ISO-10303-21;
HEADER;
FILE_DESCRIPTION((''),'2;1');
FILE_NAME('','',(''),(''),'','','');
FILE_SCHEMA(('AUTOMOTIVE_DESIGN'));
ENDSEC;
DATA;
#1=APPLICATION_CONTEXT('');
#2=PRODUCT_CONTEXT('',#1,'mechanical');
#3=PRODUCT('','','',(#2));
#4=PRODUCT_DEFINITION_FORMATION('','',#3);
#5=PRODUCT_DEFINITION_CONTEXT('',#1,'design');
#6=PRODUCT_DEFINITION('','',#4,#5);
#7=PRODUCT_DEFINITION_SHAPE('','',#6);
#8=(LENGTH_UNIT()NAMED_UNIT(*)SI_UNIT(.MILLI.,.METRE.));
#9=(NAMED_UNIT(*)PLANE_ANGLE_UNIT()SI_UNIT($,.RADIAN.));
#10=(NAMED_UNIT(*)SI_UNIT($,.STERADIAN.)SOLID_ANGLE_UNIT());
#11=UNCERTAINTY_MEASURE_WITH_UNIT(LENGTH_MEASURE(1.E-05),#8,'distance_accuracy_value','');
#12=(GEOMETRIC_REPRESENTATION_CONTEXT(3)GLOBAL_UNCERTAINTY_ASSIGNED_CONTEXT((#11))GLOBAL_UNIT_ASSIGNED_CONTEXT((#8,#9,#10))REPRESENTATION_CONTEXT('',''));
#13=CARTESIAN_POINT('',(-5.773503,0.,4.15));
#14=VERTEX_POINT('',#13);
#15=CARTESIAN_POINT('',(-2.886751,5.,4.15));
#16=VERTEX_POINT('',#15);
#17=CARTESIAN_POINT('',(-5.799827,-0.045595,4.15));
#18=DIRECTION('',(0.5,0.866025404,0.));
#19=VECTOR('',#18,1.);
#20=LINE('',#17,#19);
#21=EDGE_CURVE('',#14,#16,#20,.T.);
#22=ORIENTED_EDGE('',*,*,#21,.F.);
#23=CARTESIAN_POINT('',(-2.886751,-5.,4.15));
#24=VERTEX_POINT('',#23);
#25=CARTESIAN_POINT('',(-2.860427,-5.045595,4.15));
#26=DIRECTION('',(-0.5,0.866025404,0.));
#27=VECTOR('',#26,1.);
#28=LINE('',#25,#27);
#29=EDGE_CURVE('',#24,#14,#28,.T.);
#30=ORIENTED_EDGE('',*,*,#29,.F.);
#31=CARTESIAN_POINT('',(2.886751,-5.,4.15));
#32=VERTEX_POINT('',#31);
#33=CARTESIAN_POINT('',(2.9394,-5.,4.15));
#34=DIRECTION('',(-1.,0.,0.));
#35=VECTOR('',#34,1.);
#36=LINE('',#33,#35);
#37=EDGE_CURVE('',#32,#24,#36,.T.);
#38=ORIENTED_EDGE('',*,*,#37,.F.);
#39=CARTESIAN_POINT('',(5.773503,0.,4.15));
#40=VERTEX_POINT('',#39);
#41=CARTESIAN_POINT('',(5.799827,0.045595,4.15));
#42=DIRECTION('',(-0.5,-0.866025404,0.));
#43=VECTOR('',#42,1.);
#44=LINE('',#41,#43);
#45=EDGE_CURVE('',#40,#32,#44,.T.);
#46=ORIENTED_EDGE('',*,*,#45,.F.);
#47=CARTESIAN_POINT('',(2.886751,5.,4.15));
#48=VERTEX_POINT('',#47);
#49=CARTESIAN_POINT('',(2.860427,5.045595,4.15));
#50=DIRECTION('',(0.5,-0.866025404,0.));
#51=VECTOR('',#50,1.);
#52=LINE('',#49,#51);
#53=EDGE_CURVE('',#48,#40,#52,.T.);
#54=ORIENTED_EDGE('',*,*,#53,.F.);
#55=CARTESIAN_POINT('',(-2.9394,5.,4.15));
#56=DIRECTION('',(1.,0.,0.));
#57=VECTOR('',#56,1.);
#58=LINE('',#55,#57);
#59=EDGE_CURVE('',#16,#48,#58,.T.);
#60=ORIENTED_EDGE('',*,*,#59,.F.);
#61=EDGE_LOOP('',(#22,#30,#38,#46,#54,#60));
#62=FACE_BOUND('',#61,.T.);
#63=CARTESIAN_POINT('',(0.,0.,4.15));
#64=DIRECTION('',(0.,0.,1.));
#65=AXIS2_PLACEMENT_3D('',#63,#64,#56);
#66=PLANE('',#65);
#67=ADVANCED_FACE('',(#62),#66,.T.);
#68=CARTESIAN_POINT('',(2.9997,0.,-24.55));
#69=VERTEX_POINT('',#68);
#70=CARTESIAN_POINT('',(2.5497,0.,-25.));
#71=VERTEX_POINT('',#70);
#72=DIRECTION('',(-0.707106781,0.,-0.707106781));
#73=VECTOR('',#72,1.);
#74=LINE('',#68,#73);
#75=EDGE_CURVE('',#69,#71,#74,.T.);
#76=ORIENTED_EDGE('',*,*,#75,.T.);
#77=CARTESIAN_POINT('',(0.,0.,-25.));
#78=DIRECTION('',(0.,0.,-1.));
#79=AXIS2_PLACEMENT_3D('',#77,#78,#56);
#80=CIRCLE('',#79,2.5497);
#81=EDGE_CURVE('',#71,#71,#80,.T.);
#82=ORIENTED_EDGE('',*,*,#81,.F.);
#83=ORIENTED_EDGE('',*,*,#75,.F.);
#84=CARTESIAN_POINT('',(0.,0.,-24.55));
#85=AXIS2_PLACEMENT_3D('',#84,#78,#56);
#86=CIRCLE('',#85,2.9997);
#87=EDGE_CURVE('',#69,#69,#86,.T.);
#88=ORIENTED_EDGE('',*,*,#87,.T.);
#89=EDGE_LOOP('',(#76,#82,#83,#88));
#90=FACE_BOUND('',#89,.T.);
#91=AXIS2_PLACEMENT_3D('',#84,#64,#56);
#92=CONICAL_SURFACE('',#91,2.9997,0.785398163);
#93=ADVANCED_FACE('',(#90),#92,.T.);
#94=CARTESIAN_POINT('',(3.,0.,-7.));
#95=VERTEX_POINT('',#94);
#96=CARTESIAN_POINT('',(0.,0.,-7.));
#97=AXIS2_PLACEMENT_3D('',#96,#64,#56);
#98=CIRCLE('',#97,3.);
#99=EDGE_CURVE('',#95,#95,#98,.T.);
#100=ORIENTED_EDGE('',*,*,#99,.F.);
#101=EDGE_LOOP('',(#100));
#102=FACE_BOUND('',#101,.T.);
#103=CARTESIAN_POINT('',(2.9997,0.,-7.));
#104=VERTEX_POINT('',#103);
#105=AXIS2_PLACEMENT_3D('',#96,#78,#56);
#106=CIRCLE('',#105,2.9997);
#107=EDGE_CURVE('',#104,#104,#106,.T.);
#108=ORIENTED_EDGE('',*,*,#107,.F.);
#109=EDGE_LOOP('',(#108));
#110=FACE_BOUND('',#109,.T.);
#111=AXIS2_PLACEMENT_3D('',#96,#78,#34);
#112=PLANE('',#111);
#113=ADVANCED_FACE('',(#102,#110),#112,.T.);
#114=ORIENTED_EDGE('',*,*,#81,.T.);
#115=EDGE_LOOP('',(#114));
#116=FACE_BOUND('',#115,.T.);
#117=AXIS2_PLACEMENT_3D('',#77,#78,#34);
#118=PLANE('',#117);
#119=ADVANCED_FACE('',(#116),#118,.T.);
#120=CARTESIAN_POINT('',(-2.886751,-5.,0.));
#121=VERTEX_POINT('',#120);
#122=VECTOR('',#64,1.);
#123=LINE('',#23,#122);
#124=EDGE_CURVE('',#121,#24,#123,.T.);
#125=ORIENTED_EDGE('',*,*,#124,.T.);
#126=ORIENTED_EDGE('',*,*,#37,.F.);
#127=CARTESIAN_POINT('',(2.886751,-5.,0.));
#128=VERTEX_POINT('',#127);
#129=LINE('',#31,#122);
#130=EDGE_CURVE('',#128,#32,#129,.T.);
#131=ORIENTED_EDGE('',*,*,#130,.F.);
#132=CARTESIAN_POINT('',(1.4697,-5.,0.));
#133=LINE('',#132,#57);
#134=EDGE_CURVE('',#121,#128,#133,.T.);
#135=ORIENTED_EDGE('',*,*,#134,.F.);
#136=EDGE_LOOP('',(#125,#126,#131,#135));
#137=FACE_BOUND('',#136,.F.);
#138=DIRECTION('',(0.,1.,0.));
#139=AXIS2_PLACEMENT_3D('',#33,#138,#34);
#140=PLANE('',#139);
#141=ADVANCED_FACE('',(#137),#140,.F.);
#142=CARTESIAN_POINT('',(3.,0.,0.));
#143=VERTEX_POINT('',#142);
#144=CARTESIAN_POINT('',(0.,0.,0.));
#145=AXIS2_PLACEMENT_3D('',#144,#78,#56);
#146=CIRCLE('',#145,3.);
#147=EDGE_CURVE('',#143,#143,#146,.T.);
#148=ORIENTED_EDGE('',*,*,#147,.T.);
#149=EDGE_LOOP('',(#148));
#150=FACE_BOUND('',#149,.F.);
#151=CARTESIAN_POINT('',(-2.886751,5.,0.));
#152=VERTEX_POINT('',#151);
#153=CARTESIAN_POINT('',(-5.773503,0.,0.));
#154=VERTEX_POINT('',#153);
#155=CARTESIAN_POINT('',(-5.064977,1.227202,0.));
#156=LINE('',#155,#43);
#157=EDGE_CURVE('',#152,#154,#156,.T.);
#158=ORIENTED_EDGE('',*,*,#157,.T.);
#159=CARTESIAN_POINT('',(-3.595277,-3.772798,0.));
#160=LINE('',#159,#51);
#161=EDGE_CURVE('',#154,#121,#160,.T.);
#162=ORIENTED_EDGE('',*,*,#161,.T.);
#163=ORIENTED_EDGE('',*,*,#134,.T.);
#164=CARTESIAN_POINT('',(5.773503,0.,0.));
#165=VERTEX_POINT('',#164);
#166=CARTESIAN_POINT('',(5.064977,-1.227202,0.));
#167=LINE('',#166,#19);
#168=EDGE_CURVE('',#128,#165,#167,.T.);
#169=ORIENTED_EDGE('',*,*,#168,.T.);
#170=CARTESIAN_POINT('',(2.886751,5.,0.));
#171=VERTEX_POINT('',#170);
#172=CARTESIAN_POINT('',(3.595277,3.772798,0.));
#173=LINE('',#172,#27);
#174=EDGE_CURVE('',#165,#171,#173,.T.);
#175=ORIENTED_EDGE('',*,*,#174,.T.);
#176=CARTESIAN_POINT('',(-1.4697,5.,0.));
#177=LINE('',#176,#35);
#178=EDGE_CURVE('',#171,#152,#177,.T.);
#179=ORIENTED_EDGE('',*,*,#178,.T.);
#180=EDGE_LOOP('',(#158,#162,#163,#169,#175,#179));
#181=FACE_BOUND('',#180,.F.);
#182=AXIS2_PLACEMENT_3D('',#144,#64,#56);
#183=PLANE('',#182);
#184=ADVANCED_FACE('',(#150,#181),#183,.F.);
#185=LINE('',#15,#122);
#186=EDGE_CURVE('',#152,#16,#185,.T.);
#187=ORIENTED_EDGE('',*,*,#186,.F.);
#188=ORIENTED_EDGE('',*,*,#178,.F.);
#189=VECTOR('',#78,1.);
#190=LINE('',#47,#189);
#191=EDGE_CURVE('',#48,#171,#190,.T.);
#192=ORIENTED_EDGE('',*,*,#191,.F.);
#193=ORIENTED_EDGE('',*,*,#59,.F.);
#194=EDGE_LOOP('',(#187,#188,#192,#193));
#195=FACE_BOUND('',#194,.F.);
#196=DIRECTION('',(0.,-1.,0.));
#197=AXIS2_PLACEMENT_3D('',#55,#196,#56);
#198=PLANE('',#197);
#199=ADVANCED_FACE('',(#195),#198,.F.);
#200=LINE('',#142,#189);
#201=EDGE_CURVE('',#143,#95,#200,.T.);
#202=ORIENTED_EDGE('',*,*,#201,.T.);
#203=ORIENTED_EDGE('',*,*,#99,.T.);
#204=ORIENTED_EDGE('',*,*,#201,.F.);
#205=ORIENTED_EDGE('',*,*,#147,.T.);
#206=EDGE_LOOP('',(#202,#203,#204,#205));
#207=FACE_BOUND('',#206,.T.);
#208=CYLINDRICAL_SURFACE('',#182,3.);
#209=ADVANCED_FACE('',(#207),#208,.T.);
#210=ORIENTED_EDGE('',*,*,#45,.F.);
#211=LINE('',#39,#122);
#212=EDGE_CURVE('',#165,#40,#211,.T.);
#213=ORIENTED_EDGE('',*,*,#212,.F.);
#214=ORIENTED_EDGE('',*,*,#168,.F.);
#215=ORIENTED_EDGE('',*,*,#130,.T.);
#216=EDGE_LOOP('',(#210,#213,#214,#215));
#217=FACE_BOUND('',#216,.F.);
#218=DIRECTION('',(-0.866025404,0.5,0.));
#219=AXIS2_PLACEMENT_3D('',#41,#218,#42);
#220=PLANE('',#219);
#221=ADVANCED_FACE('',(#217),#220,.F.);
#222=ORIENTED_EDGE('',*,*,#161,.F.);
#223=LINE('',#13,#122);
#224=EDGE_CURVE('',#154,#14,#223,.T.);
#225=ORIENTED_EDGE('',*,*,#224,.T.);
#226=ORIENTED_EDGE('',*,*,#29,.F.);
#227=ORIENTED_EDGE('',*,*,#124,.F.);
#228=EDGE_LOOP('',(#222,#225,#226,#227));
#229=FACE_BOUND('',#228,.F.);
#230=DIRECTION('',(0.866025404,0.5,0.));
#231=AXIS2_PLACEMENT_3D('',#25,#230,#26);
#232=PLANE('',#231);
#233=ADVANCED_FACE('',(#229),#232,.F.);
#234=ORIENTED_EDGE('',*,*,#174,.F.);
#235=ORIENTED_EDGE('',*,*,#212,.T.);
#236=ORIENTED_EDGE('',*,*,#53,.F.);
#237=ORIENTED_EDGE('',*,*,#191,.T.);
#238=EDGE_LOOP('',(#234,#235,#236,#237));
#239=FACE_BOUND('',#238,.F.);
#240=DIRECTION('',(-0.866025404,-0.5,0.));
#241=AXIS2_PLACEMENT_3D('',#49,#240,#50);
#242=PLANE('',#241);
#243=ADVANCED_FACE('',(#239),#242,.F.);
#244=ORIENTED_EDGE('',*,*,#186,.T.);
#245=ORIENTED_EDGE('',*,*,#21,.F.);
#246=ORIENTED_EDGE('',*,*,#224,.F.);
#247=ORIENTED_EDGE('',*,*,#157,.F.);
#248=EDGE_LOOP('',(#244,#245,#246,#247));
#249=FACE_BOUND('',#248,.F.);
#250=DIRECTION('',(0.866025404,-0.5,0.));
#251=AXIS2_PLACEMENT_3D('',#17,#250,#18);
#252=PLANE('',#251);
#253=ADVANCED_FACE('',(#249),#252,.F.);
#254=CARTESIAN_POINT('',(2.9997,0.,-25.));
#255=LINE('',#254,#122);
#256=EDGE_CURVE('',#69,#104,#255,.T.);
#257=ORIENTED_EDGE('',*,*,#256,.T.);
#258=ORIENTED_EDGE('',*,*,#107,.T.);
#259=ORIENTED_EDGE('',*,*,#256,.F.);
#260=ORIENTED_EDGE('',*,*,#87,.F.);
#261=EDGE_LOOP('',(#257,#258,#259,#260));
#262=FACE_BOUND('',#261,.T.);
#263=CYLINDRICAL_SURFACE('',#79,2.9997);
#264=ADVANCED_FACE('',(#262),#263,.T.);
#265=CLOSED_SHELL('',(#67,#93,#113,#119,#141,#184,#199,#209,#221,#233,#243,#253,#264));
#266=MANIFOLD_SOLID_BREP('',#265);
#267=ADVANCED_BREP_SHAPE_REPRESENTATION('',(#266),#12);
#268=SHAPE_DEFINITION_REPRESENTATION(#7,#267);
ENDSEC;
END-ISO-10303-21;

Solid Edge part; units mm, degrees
sketch "Sketch1" plane through (0, 0, 0) normal (0, 0, 1) x (1, 0, 0)
  circle A0 centre (0, 0) radius 5.8
  dimension "D1" = 11.6
extrude "Protrusion1" add sketch "Sketch1" along normal blind 4.15
sketch "Sketch2" plane through (0, 0, 0) normal (0, 0, -1) x (1, 0, 0)
  circle A0 centre (0, 0) radius 3
extrude "Protrusion2" add sketch "Sketch2" along normal blind 25
sketch "Sketch3" plane through (0, 0, -25) normal (0, 0, -1) x (1, 0, 0)
  circle A0 centre (0, 0) radius 2.9997
extrude "Cutout1" cut sketch "Sketch3" against normal blind 18 flip side to cut
chamfer "Chamfer_1" distance 0.45 angle 45 1 edges at (-2.9997, 0, -25)
sketch "Sketch4" plane through (0, 0, 4.15) normal (0, 0, 1) x (1, 0, 0)
  line L0 (-2.9394, 5) -> (2.9394, 5)
  dimension "D1" = 10
extrude "Cutout2" cut sketch "Sketch4" against normal up to next material side at (0, 5.05, 4.15)
pattern_circular "Pattern1" count 6 over 360 about axis through (0, 0, 4.15) along (0, 0, 1) of "Cutout2"
properties part number "24104927"
